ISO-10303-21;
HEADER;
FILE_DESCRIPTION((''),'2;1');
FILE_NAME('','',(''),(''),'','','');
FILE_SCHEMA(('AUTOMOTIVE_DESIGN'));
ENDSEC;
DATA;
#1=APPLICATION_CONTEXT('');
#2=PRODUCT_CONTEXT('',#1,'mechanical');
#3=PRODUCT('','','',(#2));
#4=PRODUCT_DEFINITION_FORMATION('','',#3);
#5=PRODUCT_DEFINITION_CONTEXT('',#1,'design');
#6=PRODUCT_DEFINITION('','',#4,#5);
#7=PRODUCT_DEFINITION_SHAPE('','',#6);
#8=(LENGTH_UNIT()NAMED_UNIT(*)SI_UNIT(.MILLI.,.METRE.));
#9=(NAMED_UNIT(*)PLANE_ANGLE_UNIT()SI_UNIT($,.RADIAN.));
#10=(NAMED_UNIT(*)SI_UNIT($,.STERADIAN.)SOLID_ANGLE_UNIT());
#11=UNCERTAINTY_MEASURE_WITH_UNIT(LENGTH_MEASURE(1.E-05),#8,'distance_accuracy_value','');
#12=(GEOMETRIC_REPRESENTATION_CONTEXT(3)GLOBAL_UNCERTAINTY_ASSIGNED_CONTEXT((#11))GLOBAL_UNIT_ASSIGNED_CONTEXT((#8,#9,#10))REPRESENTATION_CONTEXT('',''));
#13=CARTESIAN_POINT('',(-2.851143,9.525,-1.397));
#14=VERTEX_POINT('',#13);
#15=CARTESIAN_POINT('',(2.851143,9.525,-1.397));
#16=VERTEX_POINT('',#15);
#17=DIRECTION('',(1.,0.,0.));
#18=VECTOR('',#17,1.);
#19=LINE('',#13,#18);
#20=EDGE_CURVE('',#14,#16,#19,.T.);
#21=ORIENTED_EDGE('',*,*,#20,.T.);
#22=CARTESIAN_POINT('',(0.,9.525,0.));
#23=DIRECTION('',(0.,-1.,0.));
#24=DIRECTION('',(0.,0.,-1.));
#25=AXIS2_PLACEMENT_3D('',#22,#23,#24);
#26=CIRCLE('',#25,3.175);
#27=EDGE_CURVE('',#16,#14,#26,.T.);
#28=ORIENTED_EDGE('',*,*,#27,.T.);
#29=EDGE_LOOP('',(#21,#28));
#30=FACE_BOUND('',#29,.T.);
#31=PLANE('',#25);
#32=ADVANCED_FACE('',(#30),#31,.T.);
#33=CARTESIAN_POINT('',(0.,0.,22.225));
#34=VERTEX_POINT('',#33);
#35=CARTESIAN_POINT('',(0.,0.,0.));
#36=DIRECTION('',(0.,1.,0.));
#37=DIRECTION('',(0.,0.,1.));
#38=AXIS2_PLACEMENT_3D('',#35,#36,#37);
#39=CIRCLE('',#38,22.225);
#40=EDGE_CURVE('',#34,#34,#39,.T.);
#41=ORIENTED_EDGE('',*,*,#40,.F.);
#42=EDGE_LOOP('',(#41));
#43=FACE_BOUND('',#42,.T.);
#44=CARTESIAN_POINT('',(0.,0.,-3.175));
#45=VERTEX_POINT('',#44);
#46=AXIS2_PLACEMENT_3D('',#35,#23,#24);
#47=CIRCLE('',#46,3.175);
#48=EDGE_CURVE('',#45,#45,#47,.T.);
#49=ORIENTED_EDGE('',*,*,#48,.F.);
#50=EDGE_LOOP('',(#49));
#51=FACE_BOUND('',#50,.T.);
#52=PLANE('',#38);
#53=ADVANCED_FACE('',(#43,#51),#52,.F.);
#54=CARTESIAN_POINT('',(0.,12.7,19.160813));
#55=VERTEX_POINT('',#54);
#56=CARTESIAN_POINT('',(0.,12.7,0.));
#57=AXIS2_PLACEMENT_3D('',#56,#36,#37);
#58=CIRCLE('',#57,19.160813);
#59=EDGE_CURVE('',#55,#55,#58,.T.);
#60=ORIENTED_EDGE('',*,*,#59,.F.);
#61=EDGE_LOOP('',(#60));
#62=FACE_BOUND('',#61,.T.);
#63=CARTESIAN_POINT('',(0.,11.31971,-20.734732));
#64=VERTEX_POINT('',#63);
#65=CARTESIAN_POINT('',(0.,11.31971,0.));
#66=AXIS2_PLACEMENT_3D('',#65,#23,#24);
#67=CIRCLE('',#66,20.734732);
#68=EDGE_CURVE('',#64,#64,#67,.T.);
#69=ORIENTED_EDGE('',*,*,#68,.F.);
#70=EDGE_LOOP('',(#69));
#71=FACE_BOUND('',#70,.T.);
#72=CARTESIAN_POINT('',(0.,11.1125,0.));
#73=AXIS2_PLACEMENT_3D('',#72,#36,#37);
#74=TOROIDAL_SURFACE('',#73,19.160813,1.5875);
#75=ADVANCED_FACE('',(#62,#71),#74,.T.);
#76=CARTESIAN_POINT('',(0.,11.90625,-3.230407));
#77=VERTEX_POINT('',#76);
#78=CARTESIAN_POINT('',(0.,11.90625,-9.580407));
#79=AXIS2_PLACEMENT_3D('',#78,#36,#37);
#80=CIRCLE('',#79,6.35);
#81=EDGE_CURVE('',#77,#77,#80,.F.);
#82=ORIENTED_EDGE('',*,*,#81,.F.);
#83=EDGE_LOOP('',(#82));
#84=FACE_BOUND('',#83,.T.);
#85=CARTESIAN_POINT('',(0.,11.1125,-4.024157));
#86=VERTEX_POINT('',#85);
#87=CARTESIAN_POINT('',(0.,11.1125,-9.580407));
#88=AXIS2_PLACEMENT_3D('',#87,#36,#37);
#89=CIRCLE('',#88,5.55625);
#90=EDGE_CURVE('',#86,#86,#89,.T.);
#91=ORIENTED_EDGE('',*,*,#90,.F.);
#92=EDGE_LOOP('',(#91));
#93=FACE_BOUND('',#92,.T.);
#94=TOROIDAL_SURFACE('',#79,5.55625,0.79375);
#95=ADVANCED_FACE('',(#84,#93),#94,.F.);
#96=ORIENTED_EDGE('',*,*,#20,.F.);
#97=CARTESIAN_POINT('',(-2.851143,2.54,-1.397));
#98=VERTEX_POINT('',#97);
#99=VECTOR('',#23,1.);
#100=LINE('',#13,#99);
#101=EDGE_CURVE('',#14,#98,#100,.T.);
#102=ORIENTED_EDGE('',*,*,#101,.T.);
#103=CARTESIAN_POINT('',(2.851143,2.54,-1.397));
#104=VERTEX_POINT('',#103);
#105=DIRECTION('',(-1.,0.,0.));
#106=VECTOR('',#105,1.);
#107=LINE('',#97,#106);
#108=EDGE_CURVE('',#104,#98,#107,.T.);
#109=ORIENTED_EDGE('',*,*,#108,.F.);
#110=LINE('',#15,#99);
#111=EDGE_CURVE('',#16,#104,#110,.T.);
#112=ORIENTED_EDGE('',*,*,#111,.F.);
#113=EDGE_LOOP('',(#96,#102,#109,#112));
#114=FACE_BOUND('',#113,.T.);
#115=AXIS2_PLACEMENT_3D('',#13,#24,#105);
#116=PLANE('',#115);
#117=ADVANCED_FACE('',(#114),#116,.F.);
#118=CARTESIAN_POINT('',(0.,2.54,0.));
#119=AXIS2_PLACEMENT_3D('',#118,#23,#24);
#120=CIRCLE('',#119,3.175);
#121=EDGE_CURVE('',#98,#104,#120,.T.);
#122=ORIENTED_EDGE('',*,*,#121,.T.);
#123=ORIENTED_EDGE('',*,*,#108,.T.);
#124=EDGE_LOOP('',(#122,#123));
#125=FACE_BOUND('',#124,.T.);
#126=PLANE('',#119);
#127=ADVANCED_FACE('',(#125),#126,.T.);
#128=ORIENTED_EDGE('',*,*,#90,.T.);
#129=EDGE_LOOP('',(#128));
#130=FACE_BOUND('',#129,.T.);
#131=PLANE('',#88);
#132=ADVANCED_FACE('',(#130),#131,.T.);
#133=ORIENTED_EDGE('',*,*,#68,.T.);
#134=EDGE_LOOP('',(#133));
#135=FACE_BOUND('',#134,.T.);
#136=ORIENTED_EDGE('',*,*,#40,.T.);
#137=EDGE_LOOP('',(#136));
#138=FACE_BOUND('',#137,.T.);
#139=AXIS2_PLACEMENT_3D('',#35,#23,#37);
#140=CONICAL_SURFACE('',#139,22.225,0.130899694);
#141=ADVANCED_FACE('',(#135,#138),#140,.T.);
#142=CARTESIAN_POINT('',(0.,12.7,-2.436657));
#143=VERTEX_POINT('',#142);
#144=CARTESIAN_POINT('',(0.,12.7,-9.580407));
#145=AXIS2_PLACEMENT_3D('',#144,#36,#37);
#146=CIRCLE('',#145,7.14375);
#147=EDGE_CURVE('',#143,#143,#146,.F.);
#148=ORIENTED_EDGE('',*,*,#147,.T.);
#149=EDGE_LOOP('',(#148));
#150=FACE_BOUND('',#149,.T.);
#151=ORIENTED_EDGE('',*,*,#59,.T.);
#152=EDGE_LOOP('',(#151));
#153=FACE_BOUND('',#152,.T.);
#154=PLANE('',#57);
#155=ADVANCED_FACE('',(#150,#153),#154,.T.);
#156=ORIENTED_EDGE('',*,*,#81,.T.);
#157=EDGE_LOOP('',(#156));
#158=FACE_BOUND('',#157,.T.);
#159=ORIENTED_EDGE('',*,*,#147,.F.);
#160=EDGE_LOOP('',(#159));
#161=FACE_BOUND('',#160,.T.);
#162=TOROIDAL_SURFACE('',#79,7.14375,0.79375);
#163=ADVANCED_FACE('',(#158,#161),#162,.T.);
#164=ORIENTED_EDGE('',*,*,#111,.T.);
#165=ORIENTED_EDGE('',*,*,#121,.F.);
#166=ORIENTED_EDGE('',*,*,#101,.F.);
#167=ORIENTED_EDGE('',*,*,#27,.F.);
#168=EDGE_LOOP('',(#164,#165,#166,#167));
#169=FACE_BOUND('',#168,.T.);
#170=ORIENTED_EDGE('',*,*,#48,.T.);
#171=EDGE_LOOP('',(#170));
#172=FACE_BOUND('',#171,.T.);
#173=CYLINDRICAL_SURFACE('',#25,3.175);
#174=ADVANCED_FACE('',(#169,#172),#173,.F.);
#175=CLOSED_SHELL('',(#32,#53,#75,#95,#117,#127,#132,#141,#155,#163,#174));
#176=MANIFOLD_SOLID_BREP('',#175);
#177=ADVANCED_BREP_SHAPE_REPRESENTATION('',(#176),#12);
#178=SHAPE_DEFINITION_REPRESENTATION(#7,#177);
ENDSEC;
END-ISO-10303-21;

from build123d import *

# Parameters (mm, degrees)
SKETCH1_R           = 22.225
BOSS_EXTRUDE1_DEPTH = 12.7
BOSS_EXTRUDE1_TAPER = 7.5
FILLET1_R           = 1.5875
SKETCH2_R           = 6.35
CUT_EXTRUDE1_DEPTH  = 1.5875
FILLET2_R           = 0.79375
CUT_EXTRUDE2_DEPTH  = 9.525
SKETCH4_R           = 3.175
CUT_EXTRUDE3_DEPTH  = 2.54


with BuildPart() as part:
    # Sketch1 → Boss-Extrude1 (new body)
    with BuildSketch(Plane(origin=(0, 0, 0), x_dir=(1, 0, 0), z_dir=(0, 1, 0))):
        Circle(SKETCH1_R)
    extrude(amount=BOSS_EXTRUDE1_DEPTH, taper=BOSS_EXTRUDE1_TAPER)

    # Fillet1
    fillet1_edges = [part.edges().sort_by_distance(p)[0] for p in [
        (-20.553013281, 12.7, 0),
    ]]
    fillet(fillet1_edges, radius=FILLET1_R)

    # Sketch2 → Cut-Extrude1 (cut)
    with BuildSketch(Plane(origin=(0, 12.7, 0), x_dir=(1, 0, 0), z_dir=(0, 1, 0))):
        with Locations(Location((0, 9.580406573, 0), (0, 0, 270))):
            Circle(SKETCH2_R)
    extrude(amount=-CUT_EXTRUDE1_DEPTH, mode=Mode.SUBTRACT)

    # Fillet2
    fillet2_edges = [part.edges().sort_by_distance(p)[0] for p in [
        (0, 11.1125, -15.930406573),
        (0, 12.7, -15.930406573),
    ]]
    fillet(fillet2_edges, radius=FILLET2_R - 0.0001)  # a hair under: the kernel refuses the full size

    # Sketch3 → Cut-Extrude2 (cut)
    with BuildSketch(Plane.XZ):
        with BuildLine():
            Line((-2.851142929, -1.397), (2.851142929, -1.397))
            ThreePointArc((2.851142929, -1.397), (0, 3.175), (-2.851142929, -1.397))
        make_face()
    extrude(amount=-CUT_EXTRUDE2_DEPTH, mode=Mode.SUBTRACT)

    # Sketch4 → Cut-Extrude3 (cut)
    with BuildSketch(Plane.XZ):
        with Locations(Location((0, 0, 0), (0, 0, 270))):
            Circle(SKETCH4_R)
    extrude(amount=-CUT_EXTRUDE3_DEPTH, mode=Mode.SUBTRACT)


solid = part.part
